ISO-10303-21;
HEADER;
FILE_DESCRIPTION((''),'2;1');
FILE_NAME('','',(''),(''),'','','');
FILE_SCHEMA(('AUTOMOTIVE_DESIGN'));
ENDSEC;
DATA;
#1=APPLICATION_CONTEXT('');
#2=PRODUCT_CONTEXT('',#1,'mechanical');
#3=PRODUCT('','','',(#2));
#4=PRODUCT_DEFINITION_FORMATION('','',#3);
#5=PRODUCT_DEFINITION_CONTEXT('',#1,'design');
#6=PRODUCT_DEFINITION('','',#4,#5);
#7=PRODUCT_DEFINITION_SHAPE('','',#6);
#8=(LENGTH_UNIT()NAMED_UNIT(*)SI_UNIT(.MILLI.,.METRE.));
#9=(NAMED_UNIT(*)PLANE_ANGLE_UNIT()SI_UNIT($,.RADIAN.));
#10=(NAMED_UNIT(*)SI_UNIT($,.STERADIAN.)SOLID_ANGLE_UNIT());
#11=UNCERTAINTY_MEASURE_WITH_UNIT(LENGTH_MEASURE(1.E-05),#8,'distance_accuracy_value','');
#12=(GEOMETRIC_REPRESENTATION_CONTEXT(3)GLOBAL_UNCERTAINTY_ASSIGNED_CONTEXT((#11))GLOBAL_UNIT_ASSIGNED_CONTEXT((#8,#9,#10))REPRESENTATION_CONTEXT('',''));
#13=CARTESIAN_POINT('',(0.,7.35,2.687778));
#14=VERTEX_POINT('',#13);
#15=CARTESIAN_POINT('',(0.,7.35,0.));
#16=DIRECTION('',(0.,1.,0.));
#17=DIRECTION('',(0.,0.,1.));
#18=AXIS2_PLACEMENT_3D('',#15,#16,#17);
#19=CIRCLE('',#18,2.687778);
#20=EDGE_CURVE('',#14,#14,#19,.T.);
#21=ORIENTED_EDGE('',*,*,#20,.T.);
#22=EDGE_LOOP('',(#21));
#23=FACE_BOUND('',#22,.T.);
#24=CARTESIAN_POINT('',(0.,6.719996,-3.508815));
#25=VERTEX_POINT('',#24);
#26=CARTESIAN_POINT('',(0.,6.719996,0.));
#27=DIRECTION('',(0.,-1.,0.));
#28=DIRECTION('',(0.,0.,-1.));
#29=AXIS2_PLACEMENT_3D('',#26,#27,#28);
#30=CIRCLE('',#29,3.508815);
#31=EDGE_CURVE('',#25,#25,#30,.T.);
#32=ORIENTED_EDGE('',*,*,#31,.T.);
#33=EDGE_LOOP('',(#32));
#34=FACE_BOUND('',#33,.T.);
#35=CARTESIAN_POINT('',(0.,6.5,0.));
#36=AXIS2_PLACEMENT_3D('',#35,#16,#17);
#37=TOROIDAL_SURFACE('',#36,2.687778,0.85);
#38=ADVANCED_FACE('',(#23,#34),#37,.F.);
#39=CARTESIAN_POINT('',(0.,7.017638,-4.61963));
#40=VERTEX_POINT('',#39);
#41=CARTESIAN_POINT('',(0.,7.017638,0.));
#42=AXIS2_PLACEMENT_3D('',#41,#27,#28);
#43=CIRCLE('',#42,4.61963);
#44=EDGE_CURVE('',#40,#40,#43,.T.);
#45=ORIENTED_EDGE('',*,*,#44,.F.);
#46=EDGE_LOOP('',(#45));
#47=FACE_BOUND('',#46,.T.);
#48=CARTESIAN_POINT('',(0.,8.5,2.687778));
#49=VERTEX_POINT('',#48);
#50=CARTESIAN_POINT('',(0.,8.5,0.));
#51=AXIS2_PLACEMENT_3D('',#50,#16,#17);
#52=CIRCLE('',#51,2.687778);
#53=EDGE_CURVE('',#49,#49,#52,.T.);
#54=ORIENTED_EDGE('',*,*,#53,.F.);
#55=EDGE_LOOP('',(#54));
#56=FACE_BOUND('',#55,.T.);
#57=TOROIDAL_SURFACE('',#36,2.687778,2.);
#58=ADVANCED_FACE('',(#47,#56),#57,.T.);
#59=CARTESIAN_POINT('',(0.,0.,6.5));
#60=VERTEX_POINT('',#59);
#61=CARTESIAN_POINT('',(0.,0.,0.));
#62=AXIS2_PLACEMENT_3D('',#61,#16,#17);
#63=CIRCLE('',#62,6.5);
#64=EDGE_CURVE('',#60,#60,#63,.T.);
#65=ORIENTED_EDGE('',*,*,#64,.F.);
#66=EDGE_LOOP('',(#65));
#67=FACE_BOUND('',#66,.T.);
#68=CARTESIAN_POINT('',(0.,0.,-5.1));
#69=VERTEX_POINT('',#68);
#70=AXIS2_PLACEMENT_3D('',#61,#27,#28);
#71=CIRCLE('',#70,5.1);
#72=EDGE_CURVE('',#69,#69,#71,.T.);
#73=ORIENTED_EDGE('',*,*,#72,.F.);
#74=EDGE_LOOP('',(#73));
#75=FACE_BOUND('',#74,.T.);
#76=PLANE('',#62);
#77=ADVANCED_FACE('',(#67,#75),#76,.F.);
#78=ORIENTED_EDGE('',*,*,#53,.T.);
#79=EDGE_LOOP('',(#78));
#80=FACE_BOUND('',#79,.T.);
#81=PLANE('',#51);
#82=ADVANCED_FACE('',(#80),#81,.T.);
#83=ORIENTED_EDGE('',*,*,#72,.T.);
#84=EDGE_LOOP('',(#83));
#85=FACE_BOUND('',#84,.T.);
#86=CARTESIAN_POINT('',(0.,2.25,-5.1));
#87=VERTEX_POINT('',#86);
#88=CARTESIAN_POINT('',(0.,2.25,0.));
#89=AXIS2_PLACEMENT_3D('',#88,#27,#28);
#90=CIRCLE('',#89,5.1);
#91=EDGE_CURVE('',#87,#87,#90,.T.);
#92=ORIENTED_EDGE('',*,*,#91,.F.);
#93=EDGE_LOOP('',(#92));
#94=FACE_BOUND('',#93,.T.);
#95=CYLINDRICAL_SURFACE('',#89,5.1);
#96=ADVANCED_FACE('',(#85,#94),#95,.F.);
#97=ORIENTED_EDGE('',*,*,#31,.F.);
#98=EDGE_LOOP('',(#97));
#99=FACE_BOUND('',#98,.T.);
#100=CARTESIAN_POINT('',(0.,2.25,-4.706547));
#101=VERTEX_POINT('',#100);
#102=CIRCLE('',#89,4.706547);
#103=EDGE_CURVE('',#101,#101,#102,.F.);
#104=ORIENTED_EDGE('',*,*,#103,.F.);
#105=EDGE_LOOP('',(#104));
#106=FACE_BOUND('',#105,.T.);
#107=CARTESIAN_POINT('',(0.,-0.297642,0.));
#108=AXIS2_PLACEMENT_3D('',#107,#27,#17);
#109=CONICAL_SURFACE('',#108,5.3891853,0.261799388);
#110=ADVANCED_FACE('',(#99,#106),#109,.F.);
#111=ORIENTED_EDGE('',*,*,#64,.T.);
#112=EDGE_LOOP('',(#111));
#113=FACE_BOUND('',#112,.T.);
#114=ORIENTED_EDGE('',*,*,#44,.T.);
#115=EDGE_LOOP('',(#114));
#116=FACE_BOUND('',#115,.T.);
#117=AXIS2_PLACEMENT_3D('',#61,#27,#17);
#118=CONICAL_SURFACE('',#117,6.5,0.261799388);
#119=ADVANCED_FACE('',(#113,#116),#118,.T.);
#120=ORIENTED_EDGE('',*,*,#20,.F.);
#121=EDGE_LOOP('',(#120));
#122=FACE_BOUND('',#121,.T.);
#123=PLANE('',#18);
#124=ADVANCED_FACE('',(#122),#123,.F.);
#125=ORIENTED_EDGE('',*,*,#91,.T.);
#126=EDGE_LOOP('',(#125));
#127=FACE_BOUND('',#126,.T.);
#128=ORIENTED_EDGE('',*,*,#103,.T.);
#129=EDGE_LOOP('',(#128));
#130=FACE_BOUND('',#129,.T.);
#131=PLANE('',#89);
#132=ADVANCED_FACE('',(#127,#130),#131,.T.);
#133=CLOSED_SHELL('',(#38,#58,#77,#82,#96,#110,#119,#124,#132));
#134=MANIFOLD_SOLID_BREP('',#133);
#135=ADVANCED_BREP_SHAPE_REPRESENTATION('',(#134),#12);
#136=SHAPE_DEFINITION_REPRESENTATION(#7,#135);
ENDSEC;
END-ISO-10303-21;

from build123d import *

# Parameters (mm, degrees)
SKETCH1_R           = 6.5
BOSS_EXTRUDE1_DEPTH = 8.5
BOSS_EXTRUDE1_TAPER = 15
SKETCH2_R           = 5.1
CUT_EXTRUDE1_DEPTH  = 2.25
FILLET1_R           = 2


# Read off the part's stored shape, not the designer's step: Shell2
with BuildPart() as part:
    # Sketch1 → Boss-Extrude1 (new body)
    with BuildSketch(Plane(origin=(0, 0, 0), x_dir=(1, 0, 0), z_dir=(0, 1, 0))):
        Circle(SKETCH1_R)
    extrude(amount=BOSS_EXTRUDE1_DEPTH, taper=BOSS_EXTRUDE1_TAPER)

    # Sketch2 → Cut-Extrude1 (cut)
    with BuildSketch(Plane.XZ):
        with Locations(Location((0, 0, 0), (0, 0, 270))):
            Circle(SKETCH2_R)
    extrude(amount=-CUT_EXTRUDE1_DEPTH, mode=Mode.SUBTRACT)

    # Fillet1
    fillet1_edges = [part.edges().sort_by_distance(p)[0] for p in [
        (-4.222431864, 8.5, 0),
    ]]
    fillet(fillet1_edges, radius=FILLET1_R)

    # Shell2 outline → Shell2 (revolve, cut)
    with BuildSketch(Plane.XY):
        with BuildLine():
            Line((4.70654671, 2.25), (3.508814841, 6.719996188))
            ThreePointArc((3.508814841, 6.719996188), (3.205225103, 7.174350339), (2.687777888, 7.35))
            Line((2.687777888, 7.35), (0, 7.35))
            Line((0, 7.35), (0, 2.25))
            Line((0, 2.25), (4.70654671, 2.25))
        make_face()
    revolve(axis=Axis((0, 0, 0), (0, 1, 0)), mode=Mode.SUBTRACT)


solid = part.part
